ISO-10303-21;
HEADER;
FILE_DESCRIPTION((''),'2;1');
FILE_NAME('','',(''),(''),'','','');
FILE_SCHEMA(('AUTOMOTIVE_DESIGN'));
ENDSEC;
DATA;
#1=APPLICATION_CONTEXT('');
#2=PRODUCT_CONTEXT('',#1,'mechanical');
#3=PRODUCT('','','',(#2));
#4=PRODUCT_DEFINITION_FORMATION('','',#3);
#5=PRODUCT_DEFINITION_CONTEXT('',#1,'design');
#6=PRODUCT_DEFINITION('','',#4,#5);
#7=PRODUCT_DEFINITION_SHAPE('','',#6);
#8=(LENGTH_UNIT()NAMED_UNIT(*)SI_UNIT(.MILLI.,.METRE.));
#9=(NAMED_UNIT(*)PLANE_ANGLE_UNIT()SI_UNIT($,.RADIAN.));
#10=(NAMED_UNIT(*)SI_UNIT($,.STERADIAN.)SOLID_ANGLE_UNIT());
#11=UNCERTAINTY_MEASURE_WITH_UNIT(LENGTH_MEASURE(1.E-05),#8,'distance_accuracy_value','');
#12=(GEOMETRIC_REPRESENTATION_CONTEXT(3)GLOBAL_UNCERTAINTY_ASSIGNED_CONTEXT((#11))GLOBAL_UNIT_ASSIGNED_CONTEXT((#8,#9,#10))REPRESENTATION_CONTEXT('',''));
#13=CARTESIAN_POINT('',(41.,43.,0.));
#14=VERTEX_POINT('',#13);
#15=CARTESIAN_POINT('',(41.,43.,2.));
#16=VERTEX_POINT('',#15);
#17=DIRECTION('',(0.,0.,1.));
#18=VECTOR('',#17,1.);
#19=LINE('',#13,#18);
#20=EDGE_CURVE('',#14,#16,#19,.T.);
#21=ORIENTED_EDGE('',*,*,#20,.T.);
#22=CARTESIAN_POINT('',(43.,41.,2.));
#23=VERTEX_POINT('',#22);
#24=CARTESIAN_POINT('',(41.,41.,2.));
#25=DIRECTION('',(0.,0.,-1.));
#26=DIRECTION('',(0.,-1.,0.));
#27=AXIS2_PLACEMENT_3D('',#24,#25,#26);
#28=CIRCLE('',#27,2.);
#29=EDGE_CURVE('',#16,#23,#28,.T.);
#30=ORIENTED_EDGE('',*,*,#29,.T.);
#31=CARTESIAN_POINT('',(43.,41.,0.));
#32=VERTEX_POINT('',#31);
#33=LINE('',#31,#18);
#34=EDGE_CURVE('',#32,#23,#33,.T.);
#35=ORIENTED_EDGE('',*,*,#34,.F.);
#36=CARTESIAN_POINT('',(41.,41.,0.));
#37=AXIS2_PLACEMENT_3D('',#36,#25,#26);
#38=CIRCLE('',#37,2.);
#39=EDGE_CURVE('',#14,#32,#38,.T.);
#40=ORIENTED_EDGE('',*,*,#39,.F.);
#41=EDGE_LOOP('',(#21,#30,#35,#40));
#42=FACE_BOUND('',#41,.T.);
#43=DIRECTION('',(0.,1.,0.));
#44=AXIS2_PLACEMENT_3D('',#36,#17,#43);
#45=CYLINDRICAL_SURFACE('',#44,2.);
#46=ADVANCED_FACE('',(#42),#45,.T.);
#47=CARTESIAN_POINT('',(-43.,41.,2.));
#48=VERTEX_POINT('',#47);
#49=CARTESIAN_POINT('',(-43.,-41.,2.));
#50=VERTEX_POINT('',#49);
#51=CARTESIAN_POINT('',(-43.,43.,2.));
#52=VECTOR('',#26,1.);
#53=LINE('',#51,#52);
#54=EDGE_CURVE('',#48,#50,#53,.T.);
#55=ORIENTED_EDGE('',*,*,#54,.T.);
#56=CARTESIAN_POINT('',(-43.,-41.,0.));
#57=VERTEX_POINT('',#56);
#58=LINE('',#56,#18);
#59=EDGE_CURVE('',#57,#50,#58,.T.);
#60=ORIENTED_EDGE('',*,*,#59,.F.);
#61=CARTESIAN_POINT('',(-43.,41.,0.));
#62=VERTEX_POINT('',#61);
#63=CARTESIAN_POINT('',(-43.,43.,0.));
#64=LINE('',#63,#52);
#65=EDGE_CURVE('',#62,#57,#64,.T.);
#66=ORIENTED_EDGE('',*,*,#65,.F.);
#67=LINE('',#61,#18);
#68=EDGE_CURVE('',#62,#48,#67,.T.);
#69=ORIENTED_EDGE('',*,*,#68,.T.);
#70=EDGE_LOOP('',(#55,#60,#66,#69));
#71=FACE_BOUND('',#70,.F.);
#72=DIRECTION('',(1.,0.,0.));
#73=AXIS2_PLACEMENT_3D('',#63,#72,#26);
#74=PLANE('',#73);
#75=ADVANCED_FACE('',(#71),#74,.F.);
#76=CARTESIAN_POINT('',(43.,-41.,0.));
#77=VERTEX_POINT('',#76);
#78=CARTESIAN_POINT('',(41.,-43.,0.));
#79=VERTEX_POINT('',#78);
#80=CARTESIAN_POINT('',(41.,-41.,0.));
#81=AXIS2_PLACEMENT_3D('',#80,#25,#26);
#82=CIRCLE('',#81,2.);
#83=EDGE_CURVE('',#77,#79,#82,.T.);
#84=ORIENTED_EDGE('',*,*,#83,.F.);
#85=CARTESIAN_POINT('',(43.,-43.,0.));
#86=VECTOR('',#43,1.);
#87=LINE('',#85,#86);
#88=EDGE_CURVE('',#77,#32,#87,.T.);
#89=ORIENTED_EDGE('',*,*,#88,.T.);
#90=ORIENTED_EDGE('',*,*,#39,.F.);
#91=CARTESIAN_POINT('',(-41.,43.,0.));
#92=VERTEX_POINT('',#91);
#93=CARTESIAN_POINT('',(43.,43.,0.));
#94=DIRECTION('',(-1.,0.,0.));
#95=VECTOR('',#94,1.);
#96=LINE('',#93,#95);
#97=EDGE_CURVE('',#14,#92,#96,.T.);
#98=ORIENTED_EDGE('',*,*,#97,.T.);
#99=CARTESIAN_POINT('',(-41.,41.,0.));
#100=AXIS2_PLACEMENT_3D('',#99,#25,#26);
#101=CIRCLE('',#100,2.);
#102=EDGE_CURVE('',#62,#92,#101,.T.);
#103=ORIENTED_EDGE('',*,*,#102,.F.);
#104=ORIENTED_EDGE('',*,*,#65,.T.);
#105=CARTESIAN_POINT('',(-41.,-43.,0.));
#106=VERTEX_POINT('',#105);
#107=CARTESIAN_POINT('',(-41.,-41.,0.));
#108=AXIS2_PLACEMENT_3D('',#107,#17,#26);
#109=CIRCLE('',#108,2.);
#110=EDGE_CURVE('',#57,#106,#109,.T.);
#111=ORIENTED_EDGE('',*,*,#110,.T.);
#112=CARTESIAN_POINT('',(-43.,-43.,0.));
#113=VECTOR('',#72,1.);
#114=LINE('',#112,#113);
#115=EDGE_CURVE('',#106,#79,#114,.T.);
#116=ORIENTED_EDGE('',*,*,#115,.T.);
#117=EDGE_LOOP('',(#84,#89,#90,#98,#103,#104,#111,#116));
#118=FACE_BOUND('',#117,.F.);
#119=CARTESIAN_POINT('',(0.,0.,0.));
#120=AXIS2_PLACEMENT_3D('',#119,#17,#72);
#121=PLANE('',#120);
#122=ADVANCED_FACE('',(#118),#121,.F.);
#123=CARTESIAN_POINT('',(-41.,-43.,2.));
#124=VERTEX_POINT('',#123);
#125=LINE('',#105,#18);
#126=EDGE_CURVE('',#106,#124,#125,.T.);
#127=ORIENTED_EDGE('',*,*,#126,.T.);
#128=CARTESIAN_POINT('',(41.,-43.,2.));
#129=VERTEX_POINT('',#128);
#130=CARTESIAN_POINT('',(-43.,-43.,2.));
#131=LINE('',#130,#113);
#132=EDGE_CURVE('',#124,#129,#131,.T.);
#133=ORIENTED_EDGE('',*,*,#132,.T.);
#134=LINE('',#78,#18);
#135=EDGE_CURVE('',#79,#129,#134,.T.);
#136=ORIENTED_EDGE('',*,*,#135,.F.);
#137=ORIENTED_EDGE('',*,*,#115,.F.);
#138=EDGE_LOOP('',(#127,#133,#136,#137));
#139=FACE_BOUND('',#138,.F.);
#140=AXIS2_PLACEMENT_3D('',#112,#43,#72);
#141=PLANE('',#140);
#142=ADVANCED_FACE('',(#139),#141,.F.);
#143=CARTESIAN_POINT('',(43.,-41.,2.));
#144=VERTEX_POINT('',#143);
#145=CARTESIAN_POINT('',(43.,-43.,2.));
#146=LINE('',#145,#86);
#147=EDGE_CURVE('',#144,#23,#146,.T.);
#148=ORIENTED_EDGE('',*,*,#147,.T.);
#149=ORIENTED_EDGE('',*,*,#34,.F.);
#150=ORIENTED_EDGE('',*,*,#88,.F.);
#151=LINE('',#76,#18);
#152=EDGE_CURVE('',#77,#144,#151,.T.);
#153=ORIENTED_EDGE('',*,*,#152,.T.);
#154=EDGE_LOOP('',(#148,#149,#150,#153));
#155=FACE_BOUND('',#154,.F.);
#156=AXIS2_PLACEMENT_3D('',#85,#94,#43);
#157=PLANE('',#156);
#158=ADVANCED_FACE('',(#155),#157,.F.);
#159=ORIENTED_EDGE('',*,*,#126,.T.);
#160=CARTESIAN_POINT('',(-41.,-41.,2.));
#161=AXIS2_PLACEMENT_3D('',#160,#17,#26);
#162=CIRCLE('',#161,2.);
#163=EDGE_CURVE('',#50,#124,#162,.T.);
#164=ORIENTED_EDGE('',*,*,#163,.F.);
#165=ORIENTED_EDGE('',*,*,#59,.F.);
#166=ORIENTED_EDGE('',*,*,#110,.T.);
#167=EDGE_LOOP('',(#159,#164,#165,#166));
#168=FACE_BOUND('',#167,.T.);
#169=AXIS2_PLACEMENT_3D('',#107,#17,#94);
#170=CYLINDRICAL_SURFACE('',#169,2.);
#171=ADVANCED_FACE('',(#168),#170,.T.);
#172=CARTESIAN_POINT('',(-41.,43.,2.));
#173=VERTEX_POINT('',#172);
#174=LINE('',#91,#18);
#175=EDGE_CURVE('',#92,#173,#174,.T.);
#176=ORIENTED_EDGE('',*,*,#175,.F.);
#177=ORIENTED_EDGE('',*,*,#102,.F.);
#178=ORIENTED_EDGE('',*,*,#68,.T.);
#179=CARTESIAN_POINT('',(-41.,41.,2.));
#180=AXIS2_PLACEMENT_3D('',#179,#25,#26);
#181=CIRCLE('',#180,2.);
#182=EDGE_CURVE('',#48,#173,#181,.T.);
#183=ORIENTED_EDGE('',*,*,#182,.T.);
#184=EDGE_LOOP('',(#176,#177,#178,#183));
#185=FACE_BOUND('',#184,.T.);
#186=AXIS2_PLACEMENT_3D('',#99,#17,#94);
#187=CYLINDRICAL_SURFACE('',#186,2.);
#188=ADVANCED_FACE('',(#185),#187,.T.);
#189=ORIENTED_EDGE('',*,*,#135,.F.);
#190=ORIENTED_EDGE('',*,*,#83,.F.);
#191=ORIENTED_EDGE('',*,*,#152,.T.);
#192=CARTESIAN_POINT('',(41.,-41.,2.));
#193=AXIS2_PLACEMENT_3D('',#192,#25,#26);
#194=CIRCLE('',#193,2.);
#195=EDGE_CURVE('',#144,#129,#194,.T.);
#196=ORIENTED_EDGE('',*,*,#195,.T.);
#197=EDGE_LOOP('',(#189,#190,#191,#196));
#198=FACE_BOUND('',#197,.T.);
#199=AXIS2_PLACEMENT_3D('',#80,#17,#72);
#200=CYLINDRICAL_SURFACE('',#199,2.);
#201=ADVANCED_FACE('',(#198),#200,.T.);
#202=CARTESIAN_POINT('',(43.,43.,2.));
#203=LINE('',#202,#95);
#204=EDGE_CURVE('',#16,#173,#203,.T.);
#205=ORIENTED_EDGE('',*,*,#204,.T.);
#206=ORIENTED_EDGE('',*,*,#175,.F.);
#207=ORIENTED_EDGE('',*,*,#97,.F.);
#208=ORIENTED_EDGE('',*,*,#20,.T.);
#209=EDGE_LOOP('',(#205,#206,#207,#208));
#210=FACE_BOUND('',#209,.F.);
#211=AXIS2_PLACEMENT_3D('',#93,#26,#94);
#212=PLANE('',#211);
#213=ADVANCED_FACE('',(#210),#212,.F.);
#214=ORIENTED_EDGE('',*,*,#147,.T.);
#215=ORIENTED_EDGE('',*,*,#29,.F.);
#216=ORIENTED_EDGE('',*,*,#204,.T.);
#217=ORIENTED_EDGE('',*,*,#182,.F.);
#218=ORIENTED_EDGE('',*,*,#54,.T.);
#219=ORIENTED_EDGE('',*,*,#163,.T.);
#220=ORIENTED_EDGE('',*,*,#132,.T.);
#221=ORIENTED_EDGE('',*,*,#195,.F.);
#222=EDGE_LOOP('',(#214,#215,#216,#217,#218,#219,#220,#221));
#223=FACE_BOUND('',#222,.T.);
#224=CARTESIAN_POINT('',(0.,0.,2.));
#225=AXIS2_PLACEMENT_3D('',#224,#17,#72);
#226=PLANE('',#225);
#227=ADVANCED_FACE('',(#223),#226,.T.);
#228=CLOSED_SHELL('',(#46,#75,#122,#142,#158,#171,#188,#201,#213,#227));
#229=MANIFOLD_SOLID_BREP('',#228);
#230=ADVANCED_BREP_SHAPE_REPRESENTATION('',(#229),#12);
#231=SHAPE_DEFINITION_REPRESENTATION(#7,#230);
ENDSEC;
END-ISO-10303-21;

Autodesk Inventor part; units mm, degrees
ref_plane "YZ Plane" through (0, 0, 0) normal (1, 0, 0) x (0, 1, 0)
ref_plane "XZ Plane" through (0, 0, 0) normal (0, 1, 0) x (-1, 0, 0)
ref_plane "XY Plane" through (0, 0, 0) normal (0, 0, 1) x (1, 0, 0)
sketch "Sketch1" plane through (0, 0, 0) normal (0, 0, 1) x (1, 0, 0)
  line L0 (-43, -43) -> (43, -43)
  line L1 (43, -43) -> (43, 43)
  line L2 (43, 43) -> (-43, 43)
  line L3 (-43, 43) -> (-43, -43)
  line L4 (-43, -43) -> (43, 43) construction
  line L5 (43, -43) -> (-43, 43) construction
  point P0 (0, 0)
  dimension "d154" = 86
  dimension "d155" = 86
extrude "Plate5" add sketch "Sketch1" along normal blind 2
fillet "Corner Round1" radius 2 4 edges at (43, 43, 1) (-43, 43, 1) (-43, -43, 1) (43, -43, 1)
properties part number "SLM 1665 FDS 1000 CUP 1" material "Stainless Steel"
